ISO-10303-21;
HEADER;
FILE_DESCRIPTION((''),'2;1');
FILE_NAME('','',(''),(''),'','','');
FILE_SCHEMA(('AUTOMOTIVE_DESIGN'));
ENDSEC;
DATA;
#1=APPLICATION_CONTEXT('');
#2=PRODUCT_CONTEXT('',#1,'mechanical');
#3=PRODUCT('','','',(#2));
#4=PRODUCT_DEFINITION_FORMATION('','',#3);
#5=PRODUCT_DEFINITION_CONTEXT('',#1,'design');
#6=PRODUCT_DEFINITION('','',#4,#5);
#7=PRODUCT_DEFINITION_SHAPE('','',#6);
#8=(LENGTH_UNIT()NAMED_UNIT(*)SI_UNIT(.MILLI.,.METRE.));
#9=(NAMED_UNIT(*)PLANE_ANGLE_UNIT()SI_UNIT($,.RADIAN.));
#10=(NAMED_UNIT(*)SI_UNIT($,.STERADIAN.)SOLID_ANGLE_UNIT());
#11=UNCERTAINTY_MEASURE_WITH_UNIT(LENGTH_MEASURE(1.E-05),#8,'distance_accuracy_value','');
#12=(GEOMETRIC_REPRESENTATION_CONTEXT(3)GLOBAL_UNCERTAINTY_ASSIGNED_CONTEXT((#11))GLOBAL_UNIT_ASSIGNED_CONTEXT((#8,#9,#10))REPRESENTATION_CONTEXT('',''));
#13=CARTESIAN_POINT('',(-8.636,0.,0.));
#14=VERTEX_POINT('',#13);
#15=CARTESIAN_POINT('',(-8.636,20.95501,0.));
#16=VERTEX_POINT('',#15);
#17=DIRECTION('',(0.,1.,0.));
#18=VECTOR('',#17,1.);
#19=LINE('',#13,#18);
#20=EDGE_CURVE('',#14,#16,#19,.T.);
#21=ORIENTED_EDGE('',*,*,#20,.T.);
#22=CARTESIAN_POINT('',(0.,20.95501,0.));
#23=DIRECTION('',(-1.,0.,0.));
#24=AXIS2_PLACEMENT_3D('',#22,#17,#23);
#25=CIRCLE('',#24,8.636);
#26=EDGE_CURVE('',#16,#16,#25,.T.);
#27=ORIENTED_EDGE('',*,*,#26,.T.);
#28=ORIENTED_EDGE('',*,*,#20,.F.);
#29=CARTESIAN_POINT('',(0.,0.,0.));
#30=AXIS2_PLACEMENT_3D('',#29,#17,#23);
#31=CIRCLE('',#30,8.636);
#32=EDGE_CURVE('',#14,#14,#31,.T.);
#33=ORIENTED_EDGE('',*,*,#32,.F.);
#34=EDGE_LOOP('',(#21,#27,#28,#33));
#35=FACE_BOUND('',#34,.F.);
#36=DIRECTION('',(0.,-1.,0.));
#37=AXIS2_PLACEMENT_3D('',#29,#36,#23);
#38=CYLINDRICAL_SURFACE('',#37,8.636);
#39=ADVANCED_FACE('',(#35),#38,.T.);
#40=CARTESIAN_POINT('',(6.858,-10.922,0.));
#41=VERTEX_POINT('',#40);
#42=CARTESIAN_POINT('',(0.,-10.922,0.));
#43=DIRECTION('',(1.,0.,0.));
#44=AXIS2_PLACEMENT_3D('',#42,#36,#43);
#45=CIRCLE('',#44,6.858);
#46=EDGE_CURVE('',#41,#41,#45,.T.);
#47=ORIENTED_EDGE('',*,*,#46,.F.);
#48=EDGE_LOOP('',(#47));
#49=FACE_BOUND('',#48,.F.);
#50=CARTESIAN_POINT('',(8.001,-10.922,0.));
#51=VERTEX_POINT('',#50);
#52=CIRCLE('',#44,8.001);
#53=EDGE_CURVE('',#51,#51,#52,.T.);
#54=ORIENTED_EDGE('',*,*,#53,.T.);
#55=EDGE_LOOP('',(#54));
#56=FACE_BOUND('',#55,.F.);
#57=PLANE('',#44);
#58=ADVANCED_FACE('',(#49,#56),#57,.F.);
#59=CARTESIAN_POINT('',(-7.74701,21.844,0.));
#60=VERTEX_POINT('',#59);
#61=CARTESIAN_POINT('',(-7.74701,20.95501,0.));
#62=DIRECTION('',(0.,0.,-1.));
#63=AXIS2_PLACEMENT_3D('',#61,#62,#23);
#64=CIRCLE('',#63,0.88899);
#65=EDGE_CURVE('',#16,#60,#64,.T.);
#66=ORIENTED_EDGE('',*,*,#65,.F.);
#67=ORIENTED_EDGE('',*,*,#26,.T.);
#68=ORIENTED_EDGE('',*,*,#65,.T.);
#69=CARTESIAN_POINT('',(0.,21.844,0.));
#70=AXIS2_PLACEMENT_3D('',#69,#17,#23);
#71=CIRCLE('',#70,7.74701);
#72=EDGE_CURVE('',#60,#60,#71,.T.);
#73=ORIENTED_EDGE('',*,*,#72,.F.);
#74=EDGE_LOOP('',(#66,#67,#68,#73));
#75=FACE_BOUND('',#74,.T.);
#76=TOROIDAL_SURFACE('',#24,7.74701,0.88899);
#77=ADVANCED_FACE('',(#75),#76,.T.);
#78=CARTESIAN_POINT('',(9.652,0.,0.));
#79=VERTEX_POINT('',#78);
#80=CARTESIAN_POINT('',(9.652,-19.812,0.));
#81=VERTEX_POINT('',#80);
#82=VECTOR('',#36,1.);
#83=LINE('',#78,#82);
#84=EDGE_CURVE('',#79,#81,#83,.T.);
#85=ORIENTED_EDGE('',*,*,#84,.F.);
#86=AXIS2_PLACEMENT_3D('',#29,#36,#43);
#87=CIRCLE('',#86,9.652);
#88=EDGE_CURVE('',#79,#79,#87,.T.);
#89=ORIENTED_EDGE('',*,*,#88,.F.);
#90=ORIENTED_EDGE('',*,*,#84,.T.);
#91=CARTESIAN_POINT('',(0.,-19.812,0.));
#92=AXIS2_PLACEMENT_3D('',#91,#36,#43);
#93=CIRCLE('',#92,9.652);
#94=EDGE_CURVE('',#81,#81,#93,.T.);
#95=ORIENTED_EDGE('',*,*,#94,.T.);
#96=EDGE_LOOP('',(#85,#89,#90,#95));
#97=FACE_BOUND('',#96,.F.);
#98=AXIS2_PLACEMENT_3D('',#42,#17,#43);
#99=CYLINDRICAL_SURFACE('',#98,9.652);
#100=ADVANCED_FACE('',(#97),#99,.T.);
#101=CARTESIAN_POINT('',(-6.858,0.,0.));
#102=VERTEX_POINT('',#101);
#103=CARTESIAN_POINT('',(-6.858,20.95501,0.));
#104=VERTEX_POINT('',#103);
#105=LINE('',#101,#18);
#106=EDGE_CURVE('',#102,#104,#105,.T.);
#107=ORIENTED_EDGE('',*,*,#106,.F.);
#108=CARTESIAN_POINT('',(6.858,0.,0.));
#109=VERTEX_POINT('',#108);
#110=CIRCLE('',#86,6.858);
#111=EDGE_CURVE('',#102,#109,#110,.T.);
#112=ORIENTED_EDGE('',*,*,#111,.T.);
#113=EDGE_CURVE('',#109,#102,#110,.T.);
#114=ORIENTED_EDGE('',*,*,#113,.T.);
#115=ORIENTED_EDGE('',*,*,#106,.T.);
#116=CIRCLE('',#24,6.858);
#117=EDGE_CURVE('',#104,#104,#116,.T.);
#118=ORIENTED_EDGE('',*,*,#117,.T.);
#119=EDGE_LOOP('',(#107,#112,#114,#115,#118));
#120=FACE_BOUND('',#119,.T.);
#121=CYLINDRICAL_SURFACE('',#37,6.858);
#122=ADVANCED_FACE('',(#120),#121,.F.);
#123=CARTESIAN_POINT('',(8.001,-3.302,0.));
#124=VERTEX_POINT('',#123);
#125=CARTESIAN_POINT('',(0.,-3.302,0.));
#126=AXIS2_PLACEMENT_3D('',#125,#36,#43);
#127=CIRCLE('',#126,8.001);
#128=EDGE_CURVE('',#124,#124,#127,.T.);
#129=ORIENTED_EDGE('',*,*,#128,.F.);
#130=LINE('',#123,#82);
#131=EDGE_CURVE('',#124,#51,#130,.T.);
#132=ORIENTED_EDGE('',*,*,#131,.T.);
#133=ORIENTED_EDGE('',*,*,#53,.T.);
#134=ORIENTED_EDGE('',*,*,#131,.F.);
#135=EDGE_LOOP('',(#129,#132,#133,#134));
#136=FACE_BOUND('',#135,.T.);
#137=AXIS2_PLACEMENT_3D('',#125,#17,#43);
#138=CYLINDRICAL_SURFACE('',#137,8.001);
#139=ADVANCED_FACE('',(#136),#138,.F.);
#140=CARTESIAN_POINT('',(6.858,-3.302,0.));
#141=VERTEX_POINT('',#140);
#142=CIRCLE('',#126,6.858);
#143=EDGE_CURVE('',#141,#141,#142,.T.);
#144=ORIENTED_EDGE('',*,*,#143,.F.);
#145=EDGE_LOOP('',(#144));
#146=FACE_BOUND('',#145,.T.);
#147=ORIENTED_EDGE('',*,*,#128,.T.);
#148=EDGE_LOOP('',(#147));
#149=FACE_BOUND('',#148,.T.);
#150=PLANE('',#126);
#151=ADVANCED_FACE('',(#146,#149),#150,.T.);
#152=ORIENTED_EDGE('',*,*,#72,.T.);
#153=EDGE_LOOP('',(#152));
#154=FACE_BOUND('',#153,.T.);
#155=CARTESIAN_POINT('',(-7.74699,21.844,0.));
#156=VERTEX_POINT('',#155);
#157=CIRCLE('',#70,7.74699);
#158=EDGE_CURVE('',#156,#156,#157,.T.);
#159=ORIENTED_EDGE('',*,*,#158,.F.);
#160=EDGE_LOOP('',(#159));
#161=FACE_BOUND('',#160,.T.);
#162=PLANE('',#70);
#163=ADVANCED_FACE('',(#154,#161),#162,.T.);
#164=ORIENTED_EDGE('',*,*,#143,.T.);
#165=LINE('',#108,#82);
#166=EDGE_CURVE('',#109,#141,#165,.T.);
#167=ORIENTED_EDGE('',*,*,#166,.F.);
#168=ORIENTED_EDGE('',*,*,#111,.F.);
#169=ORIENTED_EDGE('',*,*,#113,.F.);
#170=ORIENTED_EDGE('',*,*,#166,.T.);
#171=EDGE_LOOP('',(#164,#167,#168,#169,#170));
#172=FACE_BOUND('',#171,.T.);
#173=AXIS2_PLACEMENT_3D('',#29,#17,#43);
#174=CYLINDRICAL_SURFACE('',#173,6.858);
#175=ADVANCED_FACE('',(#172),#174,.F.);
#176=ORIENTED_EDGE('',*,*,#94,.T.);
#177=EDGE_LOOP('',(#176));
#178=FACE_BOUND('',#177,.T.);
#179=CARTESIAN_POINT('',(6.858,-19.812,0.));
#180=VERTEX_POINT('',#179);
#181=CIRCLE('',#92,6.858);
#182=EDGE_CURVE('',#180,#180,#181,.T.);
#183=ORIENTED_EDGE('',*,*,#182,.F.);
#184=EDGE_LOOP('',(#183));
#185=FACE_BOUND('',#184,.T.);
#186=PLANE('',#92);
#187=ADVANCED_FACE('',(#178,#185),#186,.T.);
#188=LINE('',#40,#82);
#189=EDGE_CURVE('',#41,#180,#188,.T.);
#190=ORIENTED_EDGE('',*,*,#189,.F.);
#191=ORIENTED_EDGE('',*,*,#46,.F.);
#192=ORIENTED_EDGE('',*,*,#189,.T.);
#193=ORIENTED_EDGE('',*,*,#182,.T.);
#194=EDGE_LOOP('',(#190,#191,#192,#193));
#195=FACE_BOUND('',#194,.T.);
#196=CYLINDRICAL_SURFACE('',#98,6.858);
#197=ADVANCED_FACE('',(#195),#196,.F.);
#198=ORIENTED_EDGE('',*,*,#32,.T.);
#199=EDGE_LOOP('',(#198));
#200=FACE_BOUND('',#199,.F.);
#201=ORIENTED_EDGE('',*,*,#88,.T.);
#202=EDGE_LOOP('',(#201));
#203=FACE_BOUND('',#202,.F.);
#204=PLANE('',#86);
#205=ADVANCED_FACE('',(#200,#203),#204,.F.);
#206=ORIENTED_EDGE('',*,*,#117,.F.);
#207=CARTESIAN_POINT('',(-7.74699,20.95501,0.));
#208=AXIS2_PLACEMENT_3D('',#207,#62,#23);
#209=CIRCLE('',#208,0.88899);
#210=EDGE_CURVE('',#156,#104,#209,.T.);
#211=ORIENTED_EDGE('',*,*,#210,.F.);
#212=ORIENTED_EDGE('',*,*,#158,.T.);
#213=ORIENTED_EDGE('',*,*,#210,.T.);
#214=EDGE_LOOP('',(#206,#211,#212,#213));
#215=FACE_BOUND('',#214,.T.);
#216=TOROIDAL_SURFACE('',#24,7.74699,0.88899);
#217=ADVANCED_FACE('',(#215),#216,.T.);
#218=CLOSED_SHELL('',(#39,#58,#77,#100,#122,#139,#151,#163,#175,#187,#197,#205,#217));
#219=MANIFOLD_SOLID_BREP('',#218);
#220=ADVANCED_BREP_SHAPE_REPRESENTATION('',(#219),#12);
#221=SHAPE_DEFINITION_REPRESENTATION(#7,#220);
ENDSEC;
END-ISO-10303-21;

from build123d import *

# Parameters (mm, degrees)
F0_R     = 9.652
F0_R_2   = 6.858
F1_DEPTH = 3.302
F2_R     = 9.652
F2_R_2   = 8.001
F3_DEPTH = 7.62
F4_R     = 9.652
F4_R_2   = 8.001
F4_R_3   = 6.858
F5_DEPTH = 8.89
F6_R     = 8.636
F6_R_2   = 6.858
F7_DEPTH = 21.844
F8_R     = 0.88899


# Not quite as in the source:
# - a fillet or chamfer is up to 0.001 mm smaller than in the source, because OpenCascade refuses the exact size


with BuildPart() as f1:
    # F0 (on Front) → F1 (new body)
    with BuildSketch(Plane.XZ):
        Circle(F0_R)
        Circle(F0_R_2, mode=Mode.SUBTRACT)
    extrude(amount=F1_DEPTH)

    # F2 (on face) → F3 (join)
    with BuildSketch(Plane.XZ.offset(3.302)):
        Circle(F2_R)
        Circle(F2_R_2, mode=Mode.SUBTRACT)
    extrude(amount=F3_DEPTH)

    # F4 (on face) → F5 (join)
    with BuildSketch(Plane.XZ.offset(10.922)):
        Circle(F4_R)
        Circle(F4_R_2, mode=Mode.SUBTRACT)
        Circle(F4_R_2)
        Circle(F4_R_3, mode=Mode.SUBTRACT)
    extrude(amount=F5_DEPTH)

    # F6 (on face) → F7 (join)
    with BuildSketch(Plane(origin=(0, 0, 0), x_dir=(-1, 0, 0), z_dir=(0, 1, 0))):
        Circle(F6_R)
        Circle(F6_R_2, mode=Mode.SUBTRACT)
    extrude(amount=F7_DEPTH)

    # F8 (radius 0.889 in the source; OpenCascade refuses exactly that, so slightly less here)
    f8_edges = [f1.edges().sort_by_distance(p)[0] for p in [
        (6.858, 21.844, 0),
        (8.636, 21.844, 0),
    ]]
    fillet(f8_edges, radius=F8_R)


solid = f1.part
